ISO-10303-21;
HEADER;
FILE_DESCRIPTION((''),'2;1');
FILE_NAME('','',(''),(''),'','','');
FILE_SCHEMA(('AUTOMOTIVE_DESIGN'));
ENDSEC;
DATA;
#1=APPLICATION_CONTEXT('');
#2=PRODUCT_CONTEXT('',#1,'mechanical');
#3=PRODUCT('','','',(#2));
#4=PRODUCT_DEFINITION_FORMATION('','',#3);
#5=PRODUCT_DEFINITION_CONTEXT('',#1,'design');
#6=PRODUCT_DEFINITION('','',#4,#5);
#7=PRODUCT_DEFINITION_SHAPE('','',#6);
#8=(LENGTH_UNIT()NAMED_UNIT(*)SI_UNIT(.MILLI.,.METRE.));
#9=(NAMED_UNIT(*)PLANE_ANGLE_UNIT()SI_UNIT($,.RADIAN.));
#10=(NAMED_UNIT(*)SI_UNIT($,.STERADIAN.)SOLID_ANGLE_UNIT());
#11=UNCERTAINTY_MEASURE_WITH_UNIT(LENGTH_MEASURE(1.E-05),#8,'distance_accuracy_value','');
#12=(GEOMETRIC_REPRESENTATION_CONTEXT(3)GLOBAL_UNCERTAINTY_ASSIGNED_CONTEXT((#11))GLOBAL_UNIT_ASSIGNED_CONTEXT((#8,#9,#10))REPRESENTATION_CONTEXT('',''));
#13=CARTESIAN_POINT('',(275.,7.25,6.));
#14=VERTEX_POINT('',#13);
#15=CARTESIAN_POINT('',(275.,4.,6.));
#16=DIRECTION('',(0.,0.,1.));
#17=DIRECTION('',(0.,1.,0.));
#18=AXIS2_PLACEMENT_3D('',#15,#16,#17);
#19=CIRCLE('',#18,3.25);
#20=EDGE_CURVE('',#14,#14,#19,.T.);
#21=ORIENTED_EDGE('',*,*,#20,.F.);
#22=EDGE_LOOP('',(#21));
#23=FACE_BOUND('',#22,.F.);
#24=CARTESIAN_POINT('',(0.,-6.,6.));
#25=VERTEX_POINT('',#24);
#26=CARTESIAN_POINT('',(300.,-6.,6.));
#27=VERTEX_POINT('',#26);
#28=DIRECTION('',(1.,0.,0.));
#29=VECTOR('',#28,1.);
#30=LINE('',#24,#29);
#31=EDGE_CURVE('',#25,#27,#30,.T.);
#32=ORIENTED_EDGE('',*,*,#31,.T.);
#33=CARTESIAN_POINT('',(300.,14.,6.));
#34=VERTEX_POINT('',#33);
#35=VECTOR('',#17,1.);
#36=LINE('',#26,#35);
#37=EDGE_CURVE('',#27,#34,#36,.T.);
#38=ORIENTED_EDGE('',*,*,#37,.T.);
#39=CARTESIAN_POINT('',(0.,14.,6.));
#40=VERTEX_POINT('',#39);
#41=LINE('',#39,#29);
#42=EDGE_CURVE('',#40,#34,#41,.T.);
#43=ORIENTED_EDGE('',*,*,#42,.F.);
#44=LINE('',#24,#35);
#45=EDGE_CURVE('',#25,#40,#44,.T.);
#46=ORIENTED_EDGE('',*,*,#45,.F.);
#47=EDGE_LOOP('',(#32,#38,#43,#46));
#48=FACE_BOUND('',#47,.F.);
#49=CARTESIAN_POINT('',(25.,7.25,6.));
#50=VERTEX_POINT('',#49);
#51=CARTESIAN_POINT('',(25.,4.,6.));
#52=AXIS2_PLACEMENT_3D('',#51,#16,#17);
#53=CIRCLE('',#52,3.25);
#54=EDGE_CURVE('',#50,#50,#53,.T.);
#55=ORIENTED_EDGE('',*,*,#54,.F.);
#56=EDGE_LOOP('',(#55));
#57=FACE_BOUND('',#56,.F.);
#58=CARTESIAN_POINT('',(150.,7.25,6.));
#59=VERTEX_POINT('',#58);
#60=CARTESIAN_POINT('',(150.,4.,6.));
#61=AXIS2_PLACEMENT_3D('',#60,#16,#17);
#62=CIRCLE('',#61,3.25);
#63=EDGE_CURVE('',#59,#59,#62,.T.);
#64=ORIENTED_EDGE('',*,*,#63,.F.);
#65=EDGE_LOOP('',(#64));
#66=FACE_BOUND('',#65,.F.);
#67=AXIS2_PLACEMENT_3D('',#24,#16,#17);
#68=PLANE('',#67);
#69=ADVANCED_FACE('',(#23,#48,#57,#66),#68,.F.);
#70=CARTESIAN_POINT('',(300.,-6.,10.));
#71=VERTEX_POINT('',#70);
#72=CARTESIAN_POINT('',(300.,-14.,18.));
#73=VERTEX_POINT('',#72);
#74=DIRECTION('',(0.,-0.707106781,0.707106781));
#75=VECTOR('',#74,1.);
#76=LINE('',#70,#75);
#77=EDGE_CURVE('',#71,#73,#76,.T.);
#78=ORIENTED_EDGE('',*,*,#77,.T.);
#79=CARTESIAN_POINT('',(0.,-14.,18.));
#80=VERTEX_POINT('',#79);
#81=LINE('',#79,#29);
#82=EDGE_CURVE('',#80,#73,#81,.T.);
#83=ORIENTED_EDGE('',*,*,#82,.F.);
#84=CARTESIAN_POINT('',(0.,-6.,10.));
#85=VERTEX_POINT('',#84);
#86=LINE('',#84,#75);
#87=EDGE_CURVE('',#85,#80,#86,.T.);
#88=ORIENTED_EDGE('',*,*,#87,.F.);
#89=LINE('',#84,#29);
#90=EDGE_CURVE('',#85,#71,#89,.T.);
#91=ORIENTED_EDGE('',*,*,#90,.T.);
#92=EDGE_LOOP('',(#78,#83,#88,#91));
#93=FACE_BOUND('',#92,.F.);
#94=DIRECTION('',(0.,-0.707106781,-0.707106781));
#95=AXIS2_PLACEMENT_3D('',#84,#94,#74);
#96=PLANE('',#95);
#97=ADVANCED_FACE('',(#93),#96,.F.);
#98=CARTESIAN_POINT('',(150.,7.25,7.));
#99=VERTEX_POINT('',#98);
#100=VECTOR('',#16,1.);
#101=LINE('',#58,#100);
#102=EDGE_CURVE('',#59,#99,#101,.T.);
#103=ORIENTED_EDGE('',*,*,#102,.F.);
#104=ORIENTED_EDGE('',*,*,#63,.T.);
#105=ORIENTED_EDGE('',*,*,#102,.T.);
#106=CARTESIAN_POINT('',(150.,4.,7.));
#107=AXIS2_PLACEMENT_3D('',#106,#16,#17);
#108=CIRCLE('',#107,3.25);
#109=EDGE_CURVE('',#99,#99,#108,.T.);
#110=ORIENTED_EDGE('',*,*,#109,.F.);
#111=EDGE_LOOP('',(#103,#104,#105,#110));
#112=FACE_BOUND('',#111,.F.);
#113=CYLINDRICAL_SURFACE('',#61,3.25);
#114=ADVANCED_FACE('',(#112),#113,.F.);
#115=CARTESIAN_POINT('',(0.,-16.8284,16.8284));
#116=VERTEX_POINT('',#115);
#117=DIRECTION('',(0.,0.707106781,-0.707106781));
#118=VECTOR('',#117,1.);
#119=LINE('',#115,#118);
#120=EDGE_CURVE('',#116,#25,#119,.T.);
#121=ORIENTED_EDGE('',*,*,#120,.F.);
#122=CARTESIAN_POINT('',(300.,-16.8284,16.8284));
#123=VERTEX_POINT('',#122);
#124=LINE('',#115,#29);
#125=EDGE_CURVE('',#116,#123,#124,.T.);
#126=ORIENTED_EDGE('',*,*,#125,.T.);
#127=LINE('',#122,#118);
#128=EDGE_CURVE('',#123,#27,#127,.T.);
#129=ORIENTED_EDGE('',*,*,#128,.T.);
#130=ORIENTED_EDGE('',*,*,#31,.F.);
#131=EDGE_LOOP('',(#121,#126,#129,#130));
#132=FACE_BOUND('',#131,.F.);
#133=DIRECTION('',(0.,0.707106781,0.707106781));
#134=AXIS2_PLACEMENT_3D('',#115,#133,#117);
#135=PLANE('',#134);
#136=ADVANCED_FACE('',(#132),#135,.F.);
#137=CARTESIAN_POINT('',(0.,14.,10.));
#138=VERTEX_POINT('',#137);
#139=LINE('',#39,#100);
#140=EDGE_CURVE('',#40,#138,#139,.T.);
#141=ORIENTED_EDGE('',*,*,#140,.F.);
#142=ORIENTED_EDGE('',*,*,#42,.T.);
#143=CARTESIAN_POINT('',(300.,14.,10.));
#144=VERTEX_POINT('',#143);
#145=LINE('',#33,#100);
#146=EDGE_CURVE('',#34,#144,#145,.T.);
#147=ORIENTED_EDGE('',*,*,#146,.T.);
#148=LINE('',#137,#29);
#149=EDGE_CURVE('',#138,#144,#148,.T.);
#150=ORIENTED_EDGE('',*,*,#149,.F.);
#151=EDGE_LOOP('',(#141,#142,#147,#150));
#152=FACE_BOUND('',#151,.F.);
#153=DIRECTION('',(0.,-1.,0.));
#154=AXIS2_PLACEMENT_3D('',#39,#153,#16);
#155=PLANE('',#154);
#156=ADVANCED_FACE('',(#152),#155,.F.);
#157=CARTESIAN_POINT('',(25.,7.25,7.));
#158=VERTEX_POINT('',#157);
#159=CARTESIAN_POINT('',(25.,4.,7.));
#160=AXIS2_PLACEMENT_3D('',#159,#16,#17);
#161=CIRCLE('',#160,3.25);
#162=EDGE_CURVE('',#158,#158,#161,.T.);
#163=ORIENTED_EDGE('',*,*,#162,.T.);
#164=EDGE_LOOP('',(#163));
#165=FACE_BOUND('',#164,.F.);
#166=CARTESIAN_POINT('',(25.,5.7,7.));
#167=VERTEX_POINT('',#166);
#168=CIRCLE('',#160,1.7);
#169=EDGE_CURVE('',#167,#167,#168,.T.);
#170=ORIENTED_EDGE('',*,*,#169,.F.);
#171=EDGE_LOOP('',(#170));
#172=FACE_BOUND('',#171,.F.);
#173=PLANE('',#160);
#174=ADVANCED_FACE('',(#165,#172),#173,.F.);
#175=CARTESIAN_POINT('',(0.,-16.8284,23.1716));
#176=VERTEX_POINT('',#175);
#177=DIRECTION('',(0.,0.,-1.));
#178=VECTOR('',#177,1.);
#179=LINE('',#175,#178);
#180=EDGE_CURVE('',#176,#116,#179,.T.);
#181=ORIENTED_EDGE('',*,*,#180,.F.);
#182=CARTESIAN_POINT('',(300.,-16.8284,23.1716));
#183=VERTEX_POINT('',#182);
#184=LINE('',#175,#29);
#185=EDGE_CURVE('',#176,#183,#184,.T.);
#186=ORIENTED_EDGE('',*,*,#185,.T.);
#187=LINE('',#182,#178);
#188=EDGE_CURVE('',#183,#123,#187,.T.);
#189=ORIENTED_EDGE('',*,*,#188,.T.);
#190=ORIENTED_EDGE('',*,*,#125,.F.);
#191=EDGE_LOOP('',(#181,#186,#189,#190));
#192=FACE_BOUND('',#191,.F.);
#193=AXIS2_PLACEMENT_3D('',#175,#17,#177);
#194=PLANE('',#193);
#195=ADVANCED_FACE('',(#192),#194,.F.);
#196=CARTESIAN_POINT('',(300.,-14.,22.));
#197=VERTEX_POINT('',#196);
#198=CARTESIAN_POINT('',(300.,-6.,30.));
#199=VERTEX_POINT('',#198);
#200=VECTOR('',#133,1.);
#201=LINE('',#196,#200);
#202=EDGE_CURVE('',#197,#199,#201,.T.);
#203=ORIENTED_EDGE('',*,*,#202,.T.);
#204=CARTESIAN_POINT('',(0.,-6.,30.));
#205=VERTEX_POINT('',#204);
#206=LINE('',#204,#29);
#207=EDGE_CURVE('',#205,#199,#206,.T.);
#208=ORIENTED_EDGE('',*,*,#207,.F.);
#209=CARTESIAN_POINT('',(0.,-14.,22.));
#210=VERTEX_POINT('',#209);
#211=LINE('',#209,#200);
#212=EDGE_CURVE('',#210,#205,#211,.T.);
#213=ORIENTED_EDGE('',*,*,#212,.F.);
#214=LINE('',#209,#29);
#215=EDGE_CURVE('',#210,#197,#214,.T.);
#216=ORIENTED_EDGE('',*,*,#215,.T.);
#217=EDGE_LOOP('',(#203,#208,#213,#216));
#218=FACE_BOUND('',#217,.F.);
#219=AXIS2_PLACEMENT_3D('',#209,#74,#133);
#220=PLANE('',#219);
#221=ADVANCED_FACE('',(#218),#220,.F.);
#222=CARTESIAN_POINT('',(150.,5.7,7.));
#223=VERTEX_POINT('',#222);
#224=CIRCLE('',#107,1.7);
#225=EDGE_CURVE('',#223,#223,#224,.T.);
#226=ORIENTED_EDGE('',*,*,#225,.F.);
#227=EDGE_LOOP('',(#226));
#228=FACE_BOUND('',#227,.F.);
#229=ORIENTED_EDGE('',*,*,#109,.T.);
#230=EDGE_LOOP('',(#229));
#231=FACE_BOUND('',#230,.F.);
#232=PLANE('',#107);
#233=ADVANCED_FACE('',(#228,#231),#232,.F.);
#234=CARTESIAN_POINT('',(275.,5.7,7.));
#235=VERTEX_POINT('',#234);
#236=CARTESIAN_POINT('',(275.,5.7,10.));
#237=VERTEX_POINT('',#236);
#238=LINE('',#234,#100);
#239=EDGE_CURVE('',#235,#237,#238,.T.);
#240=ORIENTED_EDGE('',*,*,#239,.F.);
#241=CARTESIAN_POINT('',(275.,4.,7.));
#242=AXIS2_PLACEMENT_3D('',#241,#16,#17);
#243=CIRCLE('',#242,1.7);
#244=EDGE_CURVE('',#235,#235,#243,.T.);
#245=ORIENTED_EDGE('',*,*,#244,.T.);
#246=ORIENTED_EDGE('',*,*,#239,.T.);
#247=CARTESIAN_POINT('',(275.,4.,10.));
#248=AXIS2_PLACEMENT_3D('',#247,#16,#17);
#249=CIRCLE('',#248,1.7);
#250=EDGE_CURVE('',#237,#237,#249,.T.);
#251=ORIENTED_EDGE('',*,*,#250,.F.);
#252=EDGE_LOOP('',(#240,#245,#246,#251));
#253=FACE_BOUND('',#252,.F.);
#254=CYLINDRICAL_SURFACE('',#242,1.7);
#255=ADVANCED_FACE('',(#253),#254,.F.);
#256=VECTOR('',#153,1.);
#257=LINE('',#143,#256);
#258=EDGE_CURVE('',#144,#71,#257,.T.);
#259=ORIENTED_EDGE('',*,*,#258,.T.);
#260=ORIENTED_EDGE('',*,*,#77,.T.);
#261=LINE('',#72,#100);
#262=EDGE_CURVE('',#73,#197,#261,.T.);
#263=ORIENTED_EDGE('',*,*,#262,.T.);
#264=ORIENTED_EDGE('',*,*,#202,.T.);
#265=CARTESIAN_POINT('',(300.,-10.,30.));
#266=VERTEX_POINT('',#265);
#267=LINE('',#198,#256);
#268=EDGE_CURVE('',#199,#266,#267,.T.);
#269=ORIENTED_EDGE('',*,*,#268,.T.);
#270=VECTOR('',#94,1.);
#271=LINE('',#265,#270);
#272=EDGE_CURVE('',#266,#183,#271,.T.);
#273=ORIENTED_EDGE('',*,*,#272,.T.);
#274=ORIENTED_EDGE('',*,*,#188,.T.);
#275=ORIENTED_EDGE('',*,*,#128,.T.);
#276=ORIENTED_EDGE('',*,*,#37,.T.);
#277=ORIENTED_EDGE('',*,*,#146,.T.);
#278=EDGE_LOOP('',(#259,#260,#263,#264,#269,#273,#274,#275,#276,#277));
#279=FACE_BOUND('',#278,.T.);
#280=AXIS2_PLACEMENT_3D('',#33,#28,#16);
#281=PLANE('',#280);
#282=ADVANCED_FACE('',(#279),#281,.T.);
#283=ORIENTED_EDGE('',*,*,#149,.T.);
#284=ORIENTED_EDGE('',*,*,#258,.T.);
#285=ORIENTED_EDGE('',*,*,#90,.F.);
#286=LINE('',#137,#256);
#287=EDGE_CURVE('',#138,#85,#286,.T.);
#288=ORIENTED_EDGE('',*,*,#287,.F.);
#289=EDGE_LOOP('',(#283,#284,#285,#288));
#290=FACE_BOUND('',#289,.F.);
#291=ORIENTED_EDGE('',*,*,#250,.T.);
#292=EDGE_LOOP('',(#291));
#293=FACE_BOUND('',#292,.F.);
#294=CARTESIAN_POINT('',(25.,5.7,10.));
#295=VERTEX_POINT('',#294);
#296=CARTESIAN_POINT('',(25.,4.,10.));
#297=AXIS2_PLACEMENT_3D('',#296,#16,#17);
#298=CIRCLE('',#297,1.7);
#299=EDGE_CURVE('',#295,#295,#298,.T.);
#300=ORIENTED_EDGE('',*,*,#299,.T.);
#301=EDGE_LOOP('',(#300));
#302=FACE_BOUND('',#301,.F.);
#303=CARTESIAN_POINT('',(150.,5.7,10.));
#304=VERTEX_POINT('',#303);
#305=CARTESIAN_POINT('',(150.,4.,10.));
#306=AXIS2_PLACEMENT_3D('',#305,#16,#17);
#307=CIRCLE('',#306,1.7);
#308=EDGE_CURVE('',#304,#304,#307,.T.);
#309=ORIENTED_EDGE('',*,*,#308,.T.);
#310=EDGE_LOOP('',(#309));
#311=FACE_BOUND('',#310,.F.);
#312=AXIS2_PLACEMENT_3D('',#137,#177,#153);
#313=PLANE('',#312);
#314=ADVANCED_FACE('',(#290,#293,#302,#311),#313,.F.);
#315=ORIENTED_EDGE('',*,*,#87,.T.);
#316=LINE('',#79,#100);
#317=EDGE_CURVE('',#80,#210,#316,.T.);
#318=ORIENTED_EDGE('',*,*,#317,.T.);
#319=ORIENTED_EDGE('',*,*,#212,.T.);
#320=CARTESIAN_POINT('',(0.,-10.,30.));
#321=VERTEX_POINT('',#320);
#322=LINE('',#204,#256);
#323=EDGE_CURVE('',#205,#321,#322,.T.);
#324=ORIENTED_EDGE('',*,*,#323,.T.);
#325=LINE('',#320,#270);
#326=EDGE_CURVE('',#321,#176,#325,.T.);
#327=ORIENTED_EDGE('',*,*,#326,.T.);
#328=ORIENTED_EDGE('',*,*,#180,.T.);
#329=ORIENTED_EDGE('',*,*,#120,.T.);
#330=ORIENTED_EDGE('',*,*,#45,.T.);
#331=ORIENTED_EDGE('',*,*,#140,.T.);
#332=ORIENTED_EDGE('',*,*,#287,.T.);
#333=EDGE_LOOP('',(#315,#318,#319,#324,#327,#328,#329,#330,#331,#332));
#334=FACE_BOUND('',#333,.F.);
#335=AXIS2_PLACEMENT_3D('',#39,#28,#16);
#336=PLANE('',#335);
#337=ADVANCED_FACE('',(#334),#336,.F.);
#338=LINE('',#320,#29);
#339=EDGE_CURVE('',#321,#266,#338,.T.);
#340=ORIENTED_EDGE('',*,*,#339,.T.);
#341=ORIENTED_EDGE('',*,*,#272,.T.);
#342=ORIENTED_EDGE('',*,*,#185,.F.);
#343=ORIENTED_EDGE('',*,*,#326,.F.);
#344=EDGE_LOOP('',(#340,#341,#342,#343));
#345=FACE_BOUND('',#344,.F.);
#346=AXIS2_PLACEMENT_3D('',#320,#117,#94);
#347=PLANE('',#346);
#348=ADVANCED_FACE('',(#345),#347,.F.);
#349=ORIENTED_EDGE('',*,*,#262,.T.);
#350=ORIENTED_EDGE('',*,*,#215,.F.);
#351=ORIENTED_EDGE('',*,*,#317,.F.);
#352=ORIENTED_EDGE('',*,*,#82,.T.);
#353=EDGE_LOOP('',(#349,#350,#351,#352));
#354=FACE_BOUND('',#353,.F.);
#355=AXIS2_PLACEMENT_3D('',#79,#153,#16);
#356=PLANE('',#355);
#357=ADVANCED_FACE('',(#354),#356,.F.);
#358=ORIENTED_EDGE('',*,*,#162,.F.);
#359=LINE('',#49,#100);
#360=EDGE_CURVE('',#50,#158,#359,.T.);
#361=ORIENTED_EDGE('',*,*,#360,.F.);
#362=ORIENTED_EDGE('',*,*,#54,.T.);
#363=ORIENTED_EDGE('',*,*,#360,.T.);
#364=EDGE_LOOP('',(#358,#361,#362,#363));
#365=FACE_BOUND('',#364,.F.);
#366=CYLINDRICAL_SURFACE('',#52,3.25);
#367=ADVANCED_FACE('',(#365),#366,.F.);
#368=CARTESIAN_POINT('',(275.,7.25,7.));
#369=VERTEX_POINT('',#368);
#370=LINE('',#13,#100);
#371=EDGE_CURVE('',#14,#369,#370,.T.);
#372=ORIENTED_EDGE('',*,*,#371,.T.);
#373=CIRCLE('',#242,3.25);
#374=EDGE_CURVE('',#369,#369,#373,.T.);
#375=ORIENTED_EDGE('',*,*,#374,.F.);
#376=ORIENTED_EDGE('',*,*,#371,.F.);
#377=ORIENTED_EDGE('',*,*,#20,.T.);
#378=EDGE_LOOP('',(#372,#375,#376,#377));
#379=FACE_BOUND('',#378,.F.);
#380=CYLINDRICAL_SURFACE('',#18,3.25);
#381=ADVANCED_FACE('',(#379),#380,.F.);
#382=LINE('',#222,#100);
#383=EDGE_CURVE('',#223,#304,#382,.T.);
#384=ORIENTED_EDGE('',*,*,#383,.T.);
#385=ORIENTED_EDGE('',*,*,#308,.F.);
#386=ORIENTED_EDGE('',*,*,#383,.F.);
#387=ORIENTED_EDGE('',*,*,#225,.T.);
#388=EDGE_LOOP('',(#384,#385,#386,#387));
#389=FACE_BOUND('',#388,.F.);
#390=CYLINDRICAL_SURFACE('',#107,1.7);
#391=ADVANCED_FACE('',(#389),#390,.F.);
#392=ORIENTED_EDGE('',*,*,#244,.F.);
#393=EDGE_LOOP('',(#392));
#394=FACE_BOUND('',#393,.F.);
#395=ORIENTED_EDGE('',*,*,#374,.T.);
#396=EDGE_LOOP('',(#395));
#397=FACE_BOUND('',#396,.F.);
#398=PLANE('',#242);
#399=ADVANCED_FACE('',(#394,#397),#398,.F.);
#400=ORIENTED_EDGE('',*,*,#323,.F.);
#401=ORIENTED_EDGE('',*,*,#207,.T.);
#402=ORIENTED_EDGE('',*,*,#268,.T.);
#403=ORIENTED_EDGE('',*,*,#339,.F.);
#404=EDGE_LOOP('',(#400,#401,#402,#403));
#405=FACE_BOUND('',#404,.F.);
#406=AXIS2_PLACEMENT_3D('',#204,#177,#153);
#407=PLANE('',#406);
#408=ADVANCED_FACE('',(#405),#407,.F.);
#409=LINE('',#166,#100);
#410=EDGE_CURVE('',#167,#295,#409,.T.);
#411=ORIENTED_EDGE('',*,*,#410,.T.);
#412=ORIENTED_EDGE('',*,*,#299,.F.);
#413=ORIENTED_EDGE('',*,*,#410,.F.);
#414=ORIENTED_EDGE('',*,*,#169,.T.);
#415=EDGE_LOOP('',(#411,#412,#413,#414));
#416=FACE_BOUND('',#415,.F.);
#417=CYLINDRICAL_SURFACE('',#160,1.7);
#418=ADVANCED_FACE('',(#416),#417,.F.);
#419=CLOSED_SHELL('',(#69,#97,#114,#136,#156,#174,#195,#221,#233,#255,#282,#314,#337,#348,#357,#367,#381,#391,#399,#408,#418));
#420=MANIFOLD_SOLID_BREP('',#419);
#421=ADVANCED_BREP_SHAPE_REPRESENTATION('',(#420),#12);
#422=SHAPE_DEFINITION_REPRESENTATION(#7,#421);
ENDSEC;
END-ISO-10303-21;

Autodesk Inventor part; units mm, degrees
ref_plane "YZ Plane" through (0, 0, 0) normal (1, 0, 0) x (0, 1, 0)
ref_plane "XZ Plane" through (0, 0, 0) normal (0, 1, 0) x (-1, 0, 0)
ref_plane "XY Plane" through (0, 0, 0) normal (0, 0, 1) x (1, 0, 0)
sketch "Sketch1" plane through (0, 0, 0) normal (1, 0, 0) x (0, 1, 0)
  line L0 (0, 0) -> (4, 0)
  line L1 (4, 0) -> (4, 20)
  line L2 (4, 20) -> (0, 20) construction
  line L3 (0, 20) -> (0, 0)
  line L4 (4, 20) -> (12, 28)
  line L5 (12, 28) -> (16, 28)
  line L6 (16, 28) -> (24, 20)
  line L7 (24, 20) -> (24, 24)
  line L8 (24, 24) -> (17.1716, 30.8284)
  line L9 (17.1716, 30.8284) -> (10.8284, 30.8284)
  line L10 (10.8284, 30.8284) -> (0, 20)
  line L11 (24, 20) -> (4, 20) construction
  line L12 (14, 30.8284) -> (14, 28) construction
  dimension "d0" = 20
  dimension "d1" = 4
  dimension "d8" = 135
  dimension "d11" = 20
  dimension "d12" = 8
  dimension "d13" = 2.8284
  dimension "d14" = 2.8284
extrude "Extrusion1" add sketch "Sketch1" along normal blind 300
sketch "Sketch2" plane through (0, 0, 0) normal (0, -1, 0) x (1, 0, 0)
  line L0 (300, 0) -> (300, 20) projected
  line L1 (300, 10) -> (275, 10)
  line L2 (275, 10) -> (150, 10)
  line L3 (150, 10) -> (25, 10)
  line L4 (25, 10) -> (0, 10)
  line L5 (0, 0) -> (300, 0) projected
  line L6 (0, 20) -> (0, 0) projected
  dimension "d15" = 10
  dimension "d16" = 25
hole "Hole1" at (275, 0, 10) at (150, 0, 10) at (25, 0, 10) direction (0, 1, 0) diameter 3.4 end through all counterbore diameter 6.5 counterbore depth 1 clearance for "Socket Head Cap Screw" size "M3" standard "Ansi Metric M Profile"
move or copy body "Rotate1" bodies to move or copy 1 copy no rotation origin (0, 0, 0) rotation axis (1, 0, 0) rotation angle 90 translate (0, 14, 6)
equation "\"d13\" = d14"
properties part number "Rear_Rail_Wire_Cover"
